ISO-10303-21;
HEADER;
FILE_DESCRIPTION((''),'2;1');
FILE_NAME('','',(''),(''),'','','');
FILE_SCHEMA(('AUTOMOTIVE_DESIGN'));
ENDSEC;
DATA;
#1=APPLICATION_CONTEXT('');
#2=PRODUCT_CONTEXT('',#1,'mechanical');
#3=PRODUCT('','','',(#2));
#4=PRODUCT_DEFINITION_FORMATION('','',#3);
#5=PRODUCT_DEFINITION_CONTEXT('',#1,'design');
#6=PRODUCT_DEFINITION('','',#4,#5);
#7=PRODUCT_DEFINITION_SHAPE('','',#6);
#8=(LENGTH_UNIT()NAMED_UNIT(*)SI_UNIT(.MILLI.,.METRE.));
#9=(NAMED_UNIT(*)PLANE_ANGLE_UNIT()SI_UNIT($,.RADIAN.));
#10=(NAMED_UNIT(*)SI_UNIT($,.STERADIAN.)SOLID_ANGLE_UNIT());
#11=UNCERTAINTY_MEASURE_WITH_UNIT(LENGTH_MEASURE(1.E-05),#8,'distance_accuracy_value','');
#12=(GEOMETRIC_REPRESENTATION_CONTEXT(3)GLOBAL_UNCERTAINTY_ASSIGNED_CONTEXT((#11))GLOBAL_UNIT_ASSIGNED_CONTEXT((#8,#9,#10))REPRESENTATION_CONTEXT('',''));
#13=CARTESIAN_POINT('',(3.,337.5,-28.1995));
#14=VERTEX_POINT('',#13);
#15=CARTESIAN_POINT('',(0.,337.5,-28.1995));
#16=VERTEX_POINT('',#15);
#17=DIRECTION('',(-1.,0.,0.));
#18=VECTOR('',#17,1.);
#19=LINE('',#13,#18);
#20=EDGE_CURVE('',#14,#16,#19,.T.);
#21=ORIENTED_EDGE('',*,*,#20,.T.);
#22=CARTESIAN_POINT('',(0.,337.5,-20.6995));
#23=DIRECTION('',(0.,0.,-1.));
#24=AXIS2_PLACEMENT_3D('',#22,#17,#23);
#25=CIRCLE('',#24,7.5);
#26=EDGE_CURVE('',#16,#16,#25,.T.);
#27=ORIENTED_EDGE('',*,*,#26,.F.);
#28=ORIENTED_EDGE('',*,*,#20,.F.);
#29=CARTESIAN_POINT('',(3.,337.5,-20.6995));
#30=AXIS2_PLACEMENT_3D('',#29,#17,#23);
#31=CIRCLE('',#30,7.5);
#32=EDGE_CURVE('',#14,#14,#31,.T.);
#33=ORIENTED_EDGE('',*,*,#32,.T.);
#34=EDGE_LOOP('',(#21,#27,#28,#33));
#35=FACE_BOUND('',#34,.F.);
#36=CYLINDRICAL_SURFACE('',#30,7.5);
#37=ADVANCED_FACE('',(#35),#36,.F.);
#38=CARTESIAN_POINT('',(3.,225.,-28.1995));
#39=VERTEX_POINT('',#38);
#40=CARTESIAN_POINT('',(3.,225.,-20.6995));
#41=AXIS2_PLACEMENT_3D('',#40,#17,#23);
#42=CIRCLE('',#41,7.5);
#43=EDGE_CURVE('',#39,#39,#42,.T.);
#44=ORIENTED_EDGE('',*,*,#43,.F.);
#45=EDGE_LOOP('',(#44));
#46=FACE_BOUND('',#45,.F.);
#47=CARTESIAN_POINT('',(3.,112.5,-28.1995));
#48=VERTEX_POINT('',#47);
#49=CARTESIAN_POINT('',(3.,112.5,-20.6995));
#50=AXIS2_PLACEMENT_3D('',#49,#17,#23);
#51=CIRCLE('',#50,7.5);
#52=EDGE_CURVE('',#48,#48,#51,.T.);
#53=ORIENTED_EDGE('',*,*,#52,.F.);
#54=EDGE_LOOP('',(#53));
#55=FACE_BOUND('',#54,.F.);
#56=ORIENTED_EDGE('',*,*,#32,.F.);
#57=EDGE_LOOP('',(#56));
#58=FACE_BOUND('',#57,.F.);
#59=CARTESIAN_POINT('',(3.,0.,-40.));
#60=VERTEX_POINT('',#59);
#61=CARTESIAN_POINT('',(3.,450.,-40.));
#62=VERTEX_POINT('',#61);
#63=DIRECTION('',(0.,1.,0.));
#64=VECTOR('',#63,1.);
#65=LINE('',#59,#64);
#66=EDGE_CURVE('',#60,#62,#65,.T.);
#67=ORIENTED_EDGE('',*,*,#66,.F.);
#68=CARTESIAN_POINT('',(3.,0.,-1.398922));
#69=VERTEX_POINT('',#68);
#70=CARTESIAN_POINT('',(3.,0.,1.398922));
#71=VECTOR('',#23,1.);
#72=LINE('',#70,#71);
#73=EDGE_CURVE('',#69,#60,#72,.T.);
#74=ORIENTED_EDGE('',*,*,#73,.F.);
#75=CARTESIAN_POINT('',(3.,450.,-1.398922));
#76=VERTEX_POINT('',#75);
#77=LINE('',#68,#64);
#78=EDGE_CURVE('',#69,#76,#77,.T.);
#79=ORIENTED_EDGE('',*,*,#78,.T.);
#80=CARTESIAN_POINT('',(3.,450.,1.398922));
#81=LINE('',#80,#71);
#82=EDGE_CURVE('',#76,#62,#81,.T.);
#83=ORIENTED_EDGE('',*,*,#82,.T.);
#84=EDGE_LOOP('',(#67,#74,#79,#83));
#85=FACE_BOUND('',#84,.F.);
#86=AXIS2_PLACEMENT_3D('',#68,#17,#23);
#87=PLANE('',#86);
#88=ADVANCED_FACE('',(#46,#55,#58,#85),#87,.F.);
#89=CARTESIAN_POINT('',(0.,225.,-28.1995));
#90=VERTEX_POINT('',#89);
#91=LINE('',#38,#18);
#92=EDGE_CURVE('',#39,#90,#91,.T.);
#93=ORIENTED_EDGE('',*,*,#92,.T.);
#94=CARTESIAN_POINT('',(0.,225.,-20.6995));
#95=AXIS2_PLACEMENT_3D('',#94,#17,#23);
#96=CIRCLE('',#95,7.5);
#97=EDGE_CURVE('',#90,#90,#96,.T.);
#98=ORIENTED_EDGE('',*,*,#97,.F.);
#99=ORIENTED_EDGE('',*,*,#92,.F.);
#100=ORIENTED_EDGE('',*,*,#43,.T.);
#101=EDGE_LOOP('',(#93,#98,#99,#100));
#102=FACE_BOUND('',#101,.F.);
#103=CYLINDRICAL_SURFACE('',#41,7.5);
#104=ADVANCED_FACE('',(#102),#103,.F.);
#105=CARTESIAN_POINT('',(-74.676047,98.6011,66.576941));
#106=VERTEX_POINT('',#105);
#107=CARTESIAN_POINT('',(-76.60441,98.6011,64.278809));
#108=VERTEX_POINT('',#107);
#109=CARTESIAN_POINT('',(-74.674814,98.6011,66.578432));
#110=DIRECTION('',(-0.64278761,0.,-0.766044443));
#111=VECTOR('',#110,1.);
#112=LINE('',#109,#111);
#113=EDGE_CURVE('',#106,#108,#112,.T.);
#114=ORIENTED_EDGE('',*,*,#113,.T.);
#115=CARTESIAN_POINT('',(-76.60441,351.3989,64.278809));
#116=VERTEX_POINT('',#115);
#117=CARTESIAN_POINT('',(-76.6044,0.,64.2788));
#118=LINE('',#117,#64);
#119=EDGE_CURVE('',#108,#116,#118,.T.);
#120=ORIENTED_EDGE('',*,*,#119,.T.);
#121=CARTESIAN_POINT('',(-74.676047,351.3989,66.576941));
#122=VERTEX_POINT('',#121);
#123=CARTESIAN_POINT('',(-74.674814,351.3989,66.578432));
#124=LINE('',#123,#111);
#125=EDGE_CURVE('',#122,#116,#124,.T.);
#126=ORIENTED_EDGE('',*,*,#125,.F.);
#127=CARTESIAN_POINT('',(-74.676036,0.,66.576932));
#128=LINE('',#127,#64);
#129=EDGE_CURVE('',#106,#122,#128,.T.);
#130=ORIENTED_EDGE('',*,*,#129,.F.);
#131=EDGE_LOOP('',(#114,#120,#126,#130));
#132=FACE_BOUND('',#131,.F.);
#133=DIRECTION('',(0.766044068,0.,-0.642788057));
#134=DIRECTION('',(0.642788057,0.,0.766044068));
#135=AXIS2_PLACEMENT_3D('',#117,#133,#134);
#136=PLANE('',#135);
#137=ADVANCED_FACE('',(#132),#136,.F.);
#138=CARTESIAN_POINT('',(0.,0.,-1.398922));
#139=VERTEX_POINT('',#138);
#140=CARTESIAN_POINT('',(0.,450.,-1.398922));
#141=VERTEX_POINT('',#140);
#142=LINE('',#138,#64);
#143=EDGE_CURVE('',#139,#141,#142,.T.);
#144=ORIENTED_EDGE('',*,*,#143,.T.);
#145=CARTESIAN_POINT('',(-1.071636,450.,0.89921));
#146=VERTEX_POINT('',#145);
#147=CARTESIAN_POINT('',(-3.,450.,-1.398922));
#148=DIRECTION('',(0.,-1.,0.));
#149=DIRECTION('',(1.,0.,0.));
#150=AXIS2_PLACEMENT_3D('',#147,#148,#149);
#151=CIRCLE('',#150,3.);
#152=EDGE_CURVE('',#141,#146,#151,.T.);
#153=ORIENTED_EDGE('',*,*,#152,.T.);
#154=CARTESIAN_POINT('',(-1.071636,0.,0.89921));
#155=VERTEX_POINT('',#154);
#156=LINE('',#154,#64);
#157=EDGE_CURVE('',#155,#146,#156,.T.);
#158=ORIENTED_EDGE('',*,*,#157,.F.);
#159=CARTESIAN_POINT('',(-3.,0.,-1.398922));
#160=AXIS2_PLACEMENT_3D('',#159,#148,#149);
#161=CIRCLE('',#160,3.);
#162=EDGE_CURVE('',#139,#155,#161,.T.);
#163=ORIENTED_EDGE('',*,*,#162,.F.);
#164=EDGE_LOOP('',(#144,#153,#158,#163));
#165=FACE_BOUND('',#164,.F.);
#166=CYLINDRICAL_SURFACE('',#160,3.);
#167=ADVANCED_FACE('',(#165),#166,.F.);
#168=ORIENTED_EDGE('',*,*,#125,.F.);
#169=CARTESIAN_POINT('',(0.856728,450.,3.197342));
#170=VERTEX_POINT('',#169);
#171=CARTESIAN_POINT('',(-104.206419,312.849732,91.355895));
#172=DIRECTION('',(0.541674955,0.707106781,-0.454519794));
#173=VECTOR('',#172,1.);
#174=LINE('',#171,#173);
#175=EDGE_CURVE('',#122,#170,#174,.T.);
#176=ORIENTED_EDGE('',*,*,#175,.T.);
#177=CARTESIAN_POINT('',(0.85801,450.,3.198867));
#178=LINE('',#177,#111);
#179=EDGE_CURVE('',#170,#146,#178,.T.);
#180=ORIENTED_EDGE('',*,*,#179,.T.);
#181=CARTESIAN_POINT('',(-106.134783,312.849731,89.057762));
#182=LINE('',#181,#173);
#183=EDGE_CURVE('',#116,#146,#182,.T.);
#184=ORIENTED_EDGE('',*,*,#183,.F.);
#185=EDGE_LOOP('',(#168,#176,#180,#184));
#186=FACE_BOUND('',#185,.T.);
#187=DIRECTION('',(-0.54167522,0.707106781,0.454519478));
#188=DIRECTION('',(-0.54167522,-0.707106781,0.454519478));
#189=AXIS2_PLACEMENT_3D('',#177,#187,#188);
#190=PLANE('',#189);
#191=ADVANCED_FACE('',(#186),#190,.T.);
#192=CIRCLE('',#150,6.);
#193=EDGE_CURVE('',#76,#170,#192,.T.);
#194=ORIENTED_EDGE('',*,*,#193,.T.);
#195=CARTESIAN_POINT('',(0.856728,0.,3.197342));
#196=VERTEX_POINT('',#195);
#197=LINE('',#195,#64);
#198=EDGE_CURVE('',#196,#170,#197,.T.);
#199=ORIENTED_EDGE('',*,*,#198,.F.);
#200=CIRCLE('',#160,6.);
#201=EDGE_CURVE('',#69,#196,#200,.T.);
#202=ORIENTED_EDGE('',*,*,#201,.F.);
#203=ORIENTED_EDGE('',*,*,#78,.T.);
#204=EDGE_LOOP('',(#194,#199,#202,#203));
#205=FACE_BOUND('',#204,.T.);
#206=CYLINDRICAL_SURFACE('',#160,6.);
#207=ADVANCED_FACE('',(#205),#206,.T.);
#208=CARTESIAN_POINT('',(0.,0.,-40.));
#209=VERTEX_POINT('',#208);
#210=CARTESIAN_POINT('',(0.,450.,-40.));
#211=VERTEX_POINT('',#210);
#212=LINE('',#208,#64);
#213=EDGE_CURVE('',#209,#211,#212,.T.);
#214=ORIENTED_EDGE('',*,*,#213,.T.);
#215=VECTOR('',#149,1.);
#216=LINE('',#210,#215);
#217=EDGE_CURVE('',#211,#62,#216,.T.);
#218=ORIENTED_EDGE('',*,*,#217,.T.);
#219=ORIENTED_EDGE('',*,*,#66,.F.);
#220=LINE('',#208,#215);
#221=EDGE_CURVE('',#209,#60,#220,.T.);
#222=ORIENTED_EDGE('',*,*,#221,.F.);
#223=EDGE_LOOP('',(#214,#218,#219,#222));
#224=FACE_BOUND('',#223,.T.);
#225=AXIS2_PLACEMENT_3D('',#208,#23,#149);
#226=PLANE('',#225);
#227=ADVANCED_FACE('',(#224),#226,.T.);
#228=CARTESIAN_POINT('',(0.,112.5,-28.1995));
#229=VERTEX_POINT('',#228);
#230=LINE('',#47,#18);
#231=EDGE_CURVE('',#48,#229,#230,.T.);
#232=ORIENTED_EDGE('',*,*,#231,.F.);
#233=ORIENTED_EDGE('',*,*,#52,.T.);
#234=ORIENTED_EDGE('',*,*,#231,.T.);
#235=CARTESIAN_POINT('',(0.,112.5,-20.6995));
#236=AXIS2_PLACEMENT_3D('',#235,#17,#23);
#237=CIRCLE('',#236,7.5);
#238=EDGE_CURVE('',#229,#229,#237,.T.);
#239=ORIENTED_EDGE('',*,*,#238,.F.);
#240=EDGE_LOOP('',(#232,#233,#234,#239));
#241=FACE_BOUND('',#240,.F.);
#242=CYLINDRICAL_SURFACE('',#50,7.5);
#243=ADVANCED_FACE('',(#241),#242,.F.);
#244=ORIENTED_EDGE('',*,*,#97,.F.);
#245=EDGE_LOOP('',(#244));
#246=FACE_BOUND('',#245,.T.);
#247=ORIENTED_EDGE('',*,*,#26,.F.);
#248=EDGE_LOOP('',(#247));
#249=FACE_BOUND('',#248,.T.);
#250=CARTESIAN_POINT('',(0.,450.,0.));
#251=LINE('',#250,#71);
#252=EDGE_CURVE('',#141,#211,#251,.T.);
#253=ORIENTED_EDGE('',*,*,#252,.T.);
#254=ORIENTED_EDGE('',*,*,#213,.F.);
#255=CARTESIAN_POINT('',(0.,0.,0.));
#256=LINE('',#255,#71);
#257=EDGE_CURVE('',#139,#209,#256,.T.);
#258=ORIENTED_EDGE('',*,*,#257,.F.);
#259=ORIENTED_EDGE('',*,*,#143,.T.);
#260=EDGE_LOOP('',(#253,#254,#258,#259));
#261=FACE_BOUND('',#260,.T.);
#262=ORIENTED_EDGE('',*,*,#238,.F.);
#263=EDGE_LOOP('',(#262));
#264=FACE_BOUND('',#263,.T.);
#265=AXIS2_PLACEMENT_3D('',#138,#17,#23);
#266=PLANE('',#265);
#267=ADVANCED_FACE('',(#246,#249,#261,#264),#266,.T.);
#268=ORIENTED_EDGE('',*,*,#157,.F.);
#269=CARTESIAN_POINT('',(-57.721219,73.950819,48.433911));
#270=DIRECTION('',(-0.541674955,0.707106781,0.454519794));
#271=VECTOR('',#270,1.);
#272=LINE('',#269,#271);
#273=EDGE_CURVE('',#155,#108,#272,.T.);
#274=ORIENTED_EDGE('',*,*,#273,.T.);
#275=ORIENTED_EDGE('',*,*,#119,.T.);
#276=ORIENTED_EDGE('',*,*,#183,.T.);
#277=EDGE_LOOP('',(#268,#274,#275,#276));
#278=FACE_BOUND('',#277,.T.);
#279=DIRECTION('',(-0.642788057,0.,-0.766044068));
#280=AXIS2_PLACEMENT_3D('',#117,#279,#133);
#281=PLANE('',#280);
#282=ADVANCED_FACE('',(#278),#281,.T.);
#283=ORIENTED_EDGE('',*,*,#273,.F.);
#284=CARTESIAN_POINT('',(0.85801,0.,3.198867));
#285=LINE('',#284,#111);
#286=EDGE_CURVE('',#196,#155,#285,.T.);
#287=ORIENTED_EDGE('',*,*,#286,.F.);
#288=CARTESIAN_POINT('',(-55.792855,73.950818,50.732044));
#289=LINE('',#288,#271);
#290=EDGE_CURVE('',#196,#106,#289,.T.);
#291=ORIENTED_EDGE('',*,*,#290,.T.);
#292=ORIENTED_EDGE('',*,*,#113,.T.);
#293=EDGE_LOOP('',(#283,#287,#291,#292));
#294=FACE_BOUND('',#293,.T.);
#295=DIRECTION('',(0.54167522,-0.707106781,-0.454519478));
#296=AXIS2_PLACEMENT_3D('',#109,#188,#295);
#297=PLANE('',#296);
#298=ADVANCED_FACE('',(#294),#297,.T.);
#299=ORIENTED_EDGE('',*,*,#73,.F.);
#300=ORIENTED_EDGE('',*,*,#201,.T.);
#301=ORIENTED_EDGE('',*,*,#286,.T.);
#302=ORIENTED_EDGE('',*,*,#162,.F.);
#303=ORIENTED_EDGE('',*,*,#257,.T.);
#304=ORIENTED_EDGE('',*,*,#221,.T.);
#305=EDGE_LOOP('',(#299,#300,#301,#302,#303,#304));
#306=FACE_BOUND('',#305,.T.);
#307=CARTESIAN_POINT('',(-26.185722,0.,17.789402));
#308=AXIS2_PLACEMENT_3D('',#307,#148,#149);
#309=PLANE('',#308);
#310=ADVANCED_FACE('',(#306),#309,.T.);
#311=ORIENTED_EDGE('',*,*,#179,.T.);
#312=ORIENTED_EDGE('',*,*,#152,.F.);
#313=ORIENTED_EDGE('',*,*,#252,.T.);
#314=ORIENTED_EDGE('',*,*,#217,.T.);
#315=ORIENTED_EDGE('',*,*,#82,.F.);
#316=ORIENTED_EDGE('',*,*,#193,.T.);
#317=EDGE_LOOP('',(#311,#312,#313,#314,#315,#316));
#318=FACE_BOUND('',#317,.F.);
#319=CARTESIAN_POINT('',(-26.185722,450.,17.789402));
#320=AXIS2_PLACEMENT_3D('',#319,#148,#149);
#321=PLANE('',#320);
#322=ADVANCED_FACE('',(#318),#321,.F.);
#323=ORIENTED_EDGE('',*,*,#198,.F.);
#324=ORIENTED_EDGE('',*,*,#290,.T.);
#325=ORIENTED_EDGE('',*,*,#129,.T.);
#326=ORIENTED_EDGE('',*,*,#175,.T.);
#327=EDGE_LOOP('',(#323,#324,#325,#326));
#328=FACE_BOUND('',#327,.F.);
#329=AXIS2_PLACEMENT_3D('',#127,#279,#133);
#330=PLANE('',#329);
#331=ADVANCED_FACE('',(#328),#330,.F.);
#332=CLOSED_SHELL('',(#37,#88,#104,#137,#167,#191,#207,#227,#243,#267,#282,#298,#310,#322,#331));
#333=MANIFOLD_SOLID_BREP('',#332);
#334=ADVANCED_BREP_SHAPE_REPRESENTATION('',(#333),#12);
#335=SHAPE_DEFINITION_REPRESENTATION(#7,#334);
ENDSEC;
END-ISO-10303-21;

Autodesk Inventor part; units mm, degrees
ref_plane "YZ Plane" through (0, 0, 0) normal (1, 0, 0) x (0, 1, 0)
ref_plane "XZ Plane" through (0, 0, 0) normal (0, 1, 0) x (-1, 0, 0)
ref_plane "XY Plane" through (0, 0, 0) normal (0, 0, 1) x (1, 0, 0)
sketch "Sketch1" plane through (0, 0, 0) normal (0, 1, 0) x (-1, 0, 0)
  line L0 (76.6044, 64.2788) -> (0, 0)
  line L1 (0, 0) -> (0, -40)
  dimension "d0" = 40
  dimension "d1" = 100
  dimension "d12" = 50
contour flange "Contour Flange1" sketch "Sketch1" thickness 3 bend radius 3 width 450 along (0, 1, 0) mid plane no both sides no wall seen from (-38.3022, 0, 32.1394) lies toward (0.6427876, 0, 0.7660444) curves L0 L1
bend "Bend1"
corner "Corner1"
sketch "Sketch2" plane through (-74.6761, 0, 66.5769) normal (0.6427876, 0, 0.7660444) x (0.7660444, 0, -0.6427876)
  line L0 (98.6011, 450) -> (98.6011, 0) projected
  line L1 (0, 450) -> (98.6011, 450) projected
  line L2 (0, 0) -> (0, 450) projected
  line L3 (0, 0) -> (98.6011, 0) projected
  line L4 (98.6011, 450) -> (0, 351.3989)
  line L5 (0, 98.6011) -> (98.6011, 0)
  dimension "d13" = 45
  dimension "d14" = 45
extrude "Extrusion1" cut sketch "Sketch2" against normal blind 10 contours L4 L2 L1 | L3 L2 L5
sketch "Sketch4" plane through (3, 0, -40) normal (1, 0, 0) x (0, 0, -1)
  line L0 (-38.6011, 450) -> (-38.6011, 0) projected
  line L1 (-38.6011, 450) -> (0, 450) projected
  line L2 (-19.3005, 112.5) -> (-19.3005, 225)
  line L3 (-19.3005, 225) -> (-19.3005, 337.5)
  point P0 (-40, 0)
  point P1 (-38.6011, 225)
  point P2 (-19.3005, 450)
  dimension "d17" = 112.5
hole "Hole1" at (3, 337.5, -20.6995) at (3, 225, -20.6995) at (3, 112.5, -20.6995) direction (-1, 0, 0) diameter 15 end through all
equation "\"d23\" = Thickness"
equation "\"d2\" = BendReliefWidth"
equation "\"d3\" = BendReliefDepth"
equation "\"d4\" = MinimumRemnant"
equation "\"d5\" = BendRadius"
equation "\"d7\" = BendRadius"
equation "\"d9\" = CornerReliefSize"
equation "\"d10\" = GapSize"
equation "\"d11\" = JacobiRadiusSize"
equation "\"BendRadius\" = Thickness"
equation "\"BendReliefWidth\" = Thickness"
equation "\"BendReliefDepth\" = 0.5 * Thickness"
equation "\"CornerReliefSize\" = 4 * Thickness"
equation "\"MinimumRemnant\" = 2 * Thickness"
equation "\"TransitionRadius\" = BendRadius"
equation "\"JacobiRadiusSize\" = BendRadius"
equation "\"GapSize\" = Thickness"
equation "\"Thickness\" = 3"
properties part number "SH3"
